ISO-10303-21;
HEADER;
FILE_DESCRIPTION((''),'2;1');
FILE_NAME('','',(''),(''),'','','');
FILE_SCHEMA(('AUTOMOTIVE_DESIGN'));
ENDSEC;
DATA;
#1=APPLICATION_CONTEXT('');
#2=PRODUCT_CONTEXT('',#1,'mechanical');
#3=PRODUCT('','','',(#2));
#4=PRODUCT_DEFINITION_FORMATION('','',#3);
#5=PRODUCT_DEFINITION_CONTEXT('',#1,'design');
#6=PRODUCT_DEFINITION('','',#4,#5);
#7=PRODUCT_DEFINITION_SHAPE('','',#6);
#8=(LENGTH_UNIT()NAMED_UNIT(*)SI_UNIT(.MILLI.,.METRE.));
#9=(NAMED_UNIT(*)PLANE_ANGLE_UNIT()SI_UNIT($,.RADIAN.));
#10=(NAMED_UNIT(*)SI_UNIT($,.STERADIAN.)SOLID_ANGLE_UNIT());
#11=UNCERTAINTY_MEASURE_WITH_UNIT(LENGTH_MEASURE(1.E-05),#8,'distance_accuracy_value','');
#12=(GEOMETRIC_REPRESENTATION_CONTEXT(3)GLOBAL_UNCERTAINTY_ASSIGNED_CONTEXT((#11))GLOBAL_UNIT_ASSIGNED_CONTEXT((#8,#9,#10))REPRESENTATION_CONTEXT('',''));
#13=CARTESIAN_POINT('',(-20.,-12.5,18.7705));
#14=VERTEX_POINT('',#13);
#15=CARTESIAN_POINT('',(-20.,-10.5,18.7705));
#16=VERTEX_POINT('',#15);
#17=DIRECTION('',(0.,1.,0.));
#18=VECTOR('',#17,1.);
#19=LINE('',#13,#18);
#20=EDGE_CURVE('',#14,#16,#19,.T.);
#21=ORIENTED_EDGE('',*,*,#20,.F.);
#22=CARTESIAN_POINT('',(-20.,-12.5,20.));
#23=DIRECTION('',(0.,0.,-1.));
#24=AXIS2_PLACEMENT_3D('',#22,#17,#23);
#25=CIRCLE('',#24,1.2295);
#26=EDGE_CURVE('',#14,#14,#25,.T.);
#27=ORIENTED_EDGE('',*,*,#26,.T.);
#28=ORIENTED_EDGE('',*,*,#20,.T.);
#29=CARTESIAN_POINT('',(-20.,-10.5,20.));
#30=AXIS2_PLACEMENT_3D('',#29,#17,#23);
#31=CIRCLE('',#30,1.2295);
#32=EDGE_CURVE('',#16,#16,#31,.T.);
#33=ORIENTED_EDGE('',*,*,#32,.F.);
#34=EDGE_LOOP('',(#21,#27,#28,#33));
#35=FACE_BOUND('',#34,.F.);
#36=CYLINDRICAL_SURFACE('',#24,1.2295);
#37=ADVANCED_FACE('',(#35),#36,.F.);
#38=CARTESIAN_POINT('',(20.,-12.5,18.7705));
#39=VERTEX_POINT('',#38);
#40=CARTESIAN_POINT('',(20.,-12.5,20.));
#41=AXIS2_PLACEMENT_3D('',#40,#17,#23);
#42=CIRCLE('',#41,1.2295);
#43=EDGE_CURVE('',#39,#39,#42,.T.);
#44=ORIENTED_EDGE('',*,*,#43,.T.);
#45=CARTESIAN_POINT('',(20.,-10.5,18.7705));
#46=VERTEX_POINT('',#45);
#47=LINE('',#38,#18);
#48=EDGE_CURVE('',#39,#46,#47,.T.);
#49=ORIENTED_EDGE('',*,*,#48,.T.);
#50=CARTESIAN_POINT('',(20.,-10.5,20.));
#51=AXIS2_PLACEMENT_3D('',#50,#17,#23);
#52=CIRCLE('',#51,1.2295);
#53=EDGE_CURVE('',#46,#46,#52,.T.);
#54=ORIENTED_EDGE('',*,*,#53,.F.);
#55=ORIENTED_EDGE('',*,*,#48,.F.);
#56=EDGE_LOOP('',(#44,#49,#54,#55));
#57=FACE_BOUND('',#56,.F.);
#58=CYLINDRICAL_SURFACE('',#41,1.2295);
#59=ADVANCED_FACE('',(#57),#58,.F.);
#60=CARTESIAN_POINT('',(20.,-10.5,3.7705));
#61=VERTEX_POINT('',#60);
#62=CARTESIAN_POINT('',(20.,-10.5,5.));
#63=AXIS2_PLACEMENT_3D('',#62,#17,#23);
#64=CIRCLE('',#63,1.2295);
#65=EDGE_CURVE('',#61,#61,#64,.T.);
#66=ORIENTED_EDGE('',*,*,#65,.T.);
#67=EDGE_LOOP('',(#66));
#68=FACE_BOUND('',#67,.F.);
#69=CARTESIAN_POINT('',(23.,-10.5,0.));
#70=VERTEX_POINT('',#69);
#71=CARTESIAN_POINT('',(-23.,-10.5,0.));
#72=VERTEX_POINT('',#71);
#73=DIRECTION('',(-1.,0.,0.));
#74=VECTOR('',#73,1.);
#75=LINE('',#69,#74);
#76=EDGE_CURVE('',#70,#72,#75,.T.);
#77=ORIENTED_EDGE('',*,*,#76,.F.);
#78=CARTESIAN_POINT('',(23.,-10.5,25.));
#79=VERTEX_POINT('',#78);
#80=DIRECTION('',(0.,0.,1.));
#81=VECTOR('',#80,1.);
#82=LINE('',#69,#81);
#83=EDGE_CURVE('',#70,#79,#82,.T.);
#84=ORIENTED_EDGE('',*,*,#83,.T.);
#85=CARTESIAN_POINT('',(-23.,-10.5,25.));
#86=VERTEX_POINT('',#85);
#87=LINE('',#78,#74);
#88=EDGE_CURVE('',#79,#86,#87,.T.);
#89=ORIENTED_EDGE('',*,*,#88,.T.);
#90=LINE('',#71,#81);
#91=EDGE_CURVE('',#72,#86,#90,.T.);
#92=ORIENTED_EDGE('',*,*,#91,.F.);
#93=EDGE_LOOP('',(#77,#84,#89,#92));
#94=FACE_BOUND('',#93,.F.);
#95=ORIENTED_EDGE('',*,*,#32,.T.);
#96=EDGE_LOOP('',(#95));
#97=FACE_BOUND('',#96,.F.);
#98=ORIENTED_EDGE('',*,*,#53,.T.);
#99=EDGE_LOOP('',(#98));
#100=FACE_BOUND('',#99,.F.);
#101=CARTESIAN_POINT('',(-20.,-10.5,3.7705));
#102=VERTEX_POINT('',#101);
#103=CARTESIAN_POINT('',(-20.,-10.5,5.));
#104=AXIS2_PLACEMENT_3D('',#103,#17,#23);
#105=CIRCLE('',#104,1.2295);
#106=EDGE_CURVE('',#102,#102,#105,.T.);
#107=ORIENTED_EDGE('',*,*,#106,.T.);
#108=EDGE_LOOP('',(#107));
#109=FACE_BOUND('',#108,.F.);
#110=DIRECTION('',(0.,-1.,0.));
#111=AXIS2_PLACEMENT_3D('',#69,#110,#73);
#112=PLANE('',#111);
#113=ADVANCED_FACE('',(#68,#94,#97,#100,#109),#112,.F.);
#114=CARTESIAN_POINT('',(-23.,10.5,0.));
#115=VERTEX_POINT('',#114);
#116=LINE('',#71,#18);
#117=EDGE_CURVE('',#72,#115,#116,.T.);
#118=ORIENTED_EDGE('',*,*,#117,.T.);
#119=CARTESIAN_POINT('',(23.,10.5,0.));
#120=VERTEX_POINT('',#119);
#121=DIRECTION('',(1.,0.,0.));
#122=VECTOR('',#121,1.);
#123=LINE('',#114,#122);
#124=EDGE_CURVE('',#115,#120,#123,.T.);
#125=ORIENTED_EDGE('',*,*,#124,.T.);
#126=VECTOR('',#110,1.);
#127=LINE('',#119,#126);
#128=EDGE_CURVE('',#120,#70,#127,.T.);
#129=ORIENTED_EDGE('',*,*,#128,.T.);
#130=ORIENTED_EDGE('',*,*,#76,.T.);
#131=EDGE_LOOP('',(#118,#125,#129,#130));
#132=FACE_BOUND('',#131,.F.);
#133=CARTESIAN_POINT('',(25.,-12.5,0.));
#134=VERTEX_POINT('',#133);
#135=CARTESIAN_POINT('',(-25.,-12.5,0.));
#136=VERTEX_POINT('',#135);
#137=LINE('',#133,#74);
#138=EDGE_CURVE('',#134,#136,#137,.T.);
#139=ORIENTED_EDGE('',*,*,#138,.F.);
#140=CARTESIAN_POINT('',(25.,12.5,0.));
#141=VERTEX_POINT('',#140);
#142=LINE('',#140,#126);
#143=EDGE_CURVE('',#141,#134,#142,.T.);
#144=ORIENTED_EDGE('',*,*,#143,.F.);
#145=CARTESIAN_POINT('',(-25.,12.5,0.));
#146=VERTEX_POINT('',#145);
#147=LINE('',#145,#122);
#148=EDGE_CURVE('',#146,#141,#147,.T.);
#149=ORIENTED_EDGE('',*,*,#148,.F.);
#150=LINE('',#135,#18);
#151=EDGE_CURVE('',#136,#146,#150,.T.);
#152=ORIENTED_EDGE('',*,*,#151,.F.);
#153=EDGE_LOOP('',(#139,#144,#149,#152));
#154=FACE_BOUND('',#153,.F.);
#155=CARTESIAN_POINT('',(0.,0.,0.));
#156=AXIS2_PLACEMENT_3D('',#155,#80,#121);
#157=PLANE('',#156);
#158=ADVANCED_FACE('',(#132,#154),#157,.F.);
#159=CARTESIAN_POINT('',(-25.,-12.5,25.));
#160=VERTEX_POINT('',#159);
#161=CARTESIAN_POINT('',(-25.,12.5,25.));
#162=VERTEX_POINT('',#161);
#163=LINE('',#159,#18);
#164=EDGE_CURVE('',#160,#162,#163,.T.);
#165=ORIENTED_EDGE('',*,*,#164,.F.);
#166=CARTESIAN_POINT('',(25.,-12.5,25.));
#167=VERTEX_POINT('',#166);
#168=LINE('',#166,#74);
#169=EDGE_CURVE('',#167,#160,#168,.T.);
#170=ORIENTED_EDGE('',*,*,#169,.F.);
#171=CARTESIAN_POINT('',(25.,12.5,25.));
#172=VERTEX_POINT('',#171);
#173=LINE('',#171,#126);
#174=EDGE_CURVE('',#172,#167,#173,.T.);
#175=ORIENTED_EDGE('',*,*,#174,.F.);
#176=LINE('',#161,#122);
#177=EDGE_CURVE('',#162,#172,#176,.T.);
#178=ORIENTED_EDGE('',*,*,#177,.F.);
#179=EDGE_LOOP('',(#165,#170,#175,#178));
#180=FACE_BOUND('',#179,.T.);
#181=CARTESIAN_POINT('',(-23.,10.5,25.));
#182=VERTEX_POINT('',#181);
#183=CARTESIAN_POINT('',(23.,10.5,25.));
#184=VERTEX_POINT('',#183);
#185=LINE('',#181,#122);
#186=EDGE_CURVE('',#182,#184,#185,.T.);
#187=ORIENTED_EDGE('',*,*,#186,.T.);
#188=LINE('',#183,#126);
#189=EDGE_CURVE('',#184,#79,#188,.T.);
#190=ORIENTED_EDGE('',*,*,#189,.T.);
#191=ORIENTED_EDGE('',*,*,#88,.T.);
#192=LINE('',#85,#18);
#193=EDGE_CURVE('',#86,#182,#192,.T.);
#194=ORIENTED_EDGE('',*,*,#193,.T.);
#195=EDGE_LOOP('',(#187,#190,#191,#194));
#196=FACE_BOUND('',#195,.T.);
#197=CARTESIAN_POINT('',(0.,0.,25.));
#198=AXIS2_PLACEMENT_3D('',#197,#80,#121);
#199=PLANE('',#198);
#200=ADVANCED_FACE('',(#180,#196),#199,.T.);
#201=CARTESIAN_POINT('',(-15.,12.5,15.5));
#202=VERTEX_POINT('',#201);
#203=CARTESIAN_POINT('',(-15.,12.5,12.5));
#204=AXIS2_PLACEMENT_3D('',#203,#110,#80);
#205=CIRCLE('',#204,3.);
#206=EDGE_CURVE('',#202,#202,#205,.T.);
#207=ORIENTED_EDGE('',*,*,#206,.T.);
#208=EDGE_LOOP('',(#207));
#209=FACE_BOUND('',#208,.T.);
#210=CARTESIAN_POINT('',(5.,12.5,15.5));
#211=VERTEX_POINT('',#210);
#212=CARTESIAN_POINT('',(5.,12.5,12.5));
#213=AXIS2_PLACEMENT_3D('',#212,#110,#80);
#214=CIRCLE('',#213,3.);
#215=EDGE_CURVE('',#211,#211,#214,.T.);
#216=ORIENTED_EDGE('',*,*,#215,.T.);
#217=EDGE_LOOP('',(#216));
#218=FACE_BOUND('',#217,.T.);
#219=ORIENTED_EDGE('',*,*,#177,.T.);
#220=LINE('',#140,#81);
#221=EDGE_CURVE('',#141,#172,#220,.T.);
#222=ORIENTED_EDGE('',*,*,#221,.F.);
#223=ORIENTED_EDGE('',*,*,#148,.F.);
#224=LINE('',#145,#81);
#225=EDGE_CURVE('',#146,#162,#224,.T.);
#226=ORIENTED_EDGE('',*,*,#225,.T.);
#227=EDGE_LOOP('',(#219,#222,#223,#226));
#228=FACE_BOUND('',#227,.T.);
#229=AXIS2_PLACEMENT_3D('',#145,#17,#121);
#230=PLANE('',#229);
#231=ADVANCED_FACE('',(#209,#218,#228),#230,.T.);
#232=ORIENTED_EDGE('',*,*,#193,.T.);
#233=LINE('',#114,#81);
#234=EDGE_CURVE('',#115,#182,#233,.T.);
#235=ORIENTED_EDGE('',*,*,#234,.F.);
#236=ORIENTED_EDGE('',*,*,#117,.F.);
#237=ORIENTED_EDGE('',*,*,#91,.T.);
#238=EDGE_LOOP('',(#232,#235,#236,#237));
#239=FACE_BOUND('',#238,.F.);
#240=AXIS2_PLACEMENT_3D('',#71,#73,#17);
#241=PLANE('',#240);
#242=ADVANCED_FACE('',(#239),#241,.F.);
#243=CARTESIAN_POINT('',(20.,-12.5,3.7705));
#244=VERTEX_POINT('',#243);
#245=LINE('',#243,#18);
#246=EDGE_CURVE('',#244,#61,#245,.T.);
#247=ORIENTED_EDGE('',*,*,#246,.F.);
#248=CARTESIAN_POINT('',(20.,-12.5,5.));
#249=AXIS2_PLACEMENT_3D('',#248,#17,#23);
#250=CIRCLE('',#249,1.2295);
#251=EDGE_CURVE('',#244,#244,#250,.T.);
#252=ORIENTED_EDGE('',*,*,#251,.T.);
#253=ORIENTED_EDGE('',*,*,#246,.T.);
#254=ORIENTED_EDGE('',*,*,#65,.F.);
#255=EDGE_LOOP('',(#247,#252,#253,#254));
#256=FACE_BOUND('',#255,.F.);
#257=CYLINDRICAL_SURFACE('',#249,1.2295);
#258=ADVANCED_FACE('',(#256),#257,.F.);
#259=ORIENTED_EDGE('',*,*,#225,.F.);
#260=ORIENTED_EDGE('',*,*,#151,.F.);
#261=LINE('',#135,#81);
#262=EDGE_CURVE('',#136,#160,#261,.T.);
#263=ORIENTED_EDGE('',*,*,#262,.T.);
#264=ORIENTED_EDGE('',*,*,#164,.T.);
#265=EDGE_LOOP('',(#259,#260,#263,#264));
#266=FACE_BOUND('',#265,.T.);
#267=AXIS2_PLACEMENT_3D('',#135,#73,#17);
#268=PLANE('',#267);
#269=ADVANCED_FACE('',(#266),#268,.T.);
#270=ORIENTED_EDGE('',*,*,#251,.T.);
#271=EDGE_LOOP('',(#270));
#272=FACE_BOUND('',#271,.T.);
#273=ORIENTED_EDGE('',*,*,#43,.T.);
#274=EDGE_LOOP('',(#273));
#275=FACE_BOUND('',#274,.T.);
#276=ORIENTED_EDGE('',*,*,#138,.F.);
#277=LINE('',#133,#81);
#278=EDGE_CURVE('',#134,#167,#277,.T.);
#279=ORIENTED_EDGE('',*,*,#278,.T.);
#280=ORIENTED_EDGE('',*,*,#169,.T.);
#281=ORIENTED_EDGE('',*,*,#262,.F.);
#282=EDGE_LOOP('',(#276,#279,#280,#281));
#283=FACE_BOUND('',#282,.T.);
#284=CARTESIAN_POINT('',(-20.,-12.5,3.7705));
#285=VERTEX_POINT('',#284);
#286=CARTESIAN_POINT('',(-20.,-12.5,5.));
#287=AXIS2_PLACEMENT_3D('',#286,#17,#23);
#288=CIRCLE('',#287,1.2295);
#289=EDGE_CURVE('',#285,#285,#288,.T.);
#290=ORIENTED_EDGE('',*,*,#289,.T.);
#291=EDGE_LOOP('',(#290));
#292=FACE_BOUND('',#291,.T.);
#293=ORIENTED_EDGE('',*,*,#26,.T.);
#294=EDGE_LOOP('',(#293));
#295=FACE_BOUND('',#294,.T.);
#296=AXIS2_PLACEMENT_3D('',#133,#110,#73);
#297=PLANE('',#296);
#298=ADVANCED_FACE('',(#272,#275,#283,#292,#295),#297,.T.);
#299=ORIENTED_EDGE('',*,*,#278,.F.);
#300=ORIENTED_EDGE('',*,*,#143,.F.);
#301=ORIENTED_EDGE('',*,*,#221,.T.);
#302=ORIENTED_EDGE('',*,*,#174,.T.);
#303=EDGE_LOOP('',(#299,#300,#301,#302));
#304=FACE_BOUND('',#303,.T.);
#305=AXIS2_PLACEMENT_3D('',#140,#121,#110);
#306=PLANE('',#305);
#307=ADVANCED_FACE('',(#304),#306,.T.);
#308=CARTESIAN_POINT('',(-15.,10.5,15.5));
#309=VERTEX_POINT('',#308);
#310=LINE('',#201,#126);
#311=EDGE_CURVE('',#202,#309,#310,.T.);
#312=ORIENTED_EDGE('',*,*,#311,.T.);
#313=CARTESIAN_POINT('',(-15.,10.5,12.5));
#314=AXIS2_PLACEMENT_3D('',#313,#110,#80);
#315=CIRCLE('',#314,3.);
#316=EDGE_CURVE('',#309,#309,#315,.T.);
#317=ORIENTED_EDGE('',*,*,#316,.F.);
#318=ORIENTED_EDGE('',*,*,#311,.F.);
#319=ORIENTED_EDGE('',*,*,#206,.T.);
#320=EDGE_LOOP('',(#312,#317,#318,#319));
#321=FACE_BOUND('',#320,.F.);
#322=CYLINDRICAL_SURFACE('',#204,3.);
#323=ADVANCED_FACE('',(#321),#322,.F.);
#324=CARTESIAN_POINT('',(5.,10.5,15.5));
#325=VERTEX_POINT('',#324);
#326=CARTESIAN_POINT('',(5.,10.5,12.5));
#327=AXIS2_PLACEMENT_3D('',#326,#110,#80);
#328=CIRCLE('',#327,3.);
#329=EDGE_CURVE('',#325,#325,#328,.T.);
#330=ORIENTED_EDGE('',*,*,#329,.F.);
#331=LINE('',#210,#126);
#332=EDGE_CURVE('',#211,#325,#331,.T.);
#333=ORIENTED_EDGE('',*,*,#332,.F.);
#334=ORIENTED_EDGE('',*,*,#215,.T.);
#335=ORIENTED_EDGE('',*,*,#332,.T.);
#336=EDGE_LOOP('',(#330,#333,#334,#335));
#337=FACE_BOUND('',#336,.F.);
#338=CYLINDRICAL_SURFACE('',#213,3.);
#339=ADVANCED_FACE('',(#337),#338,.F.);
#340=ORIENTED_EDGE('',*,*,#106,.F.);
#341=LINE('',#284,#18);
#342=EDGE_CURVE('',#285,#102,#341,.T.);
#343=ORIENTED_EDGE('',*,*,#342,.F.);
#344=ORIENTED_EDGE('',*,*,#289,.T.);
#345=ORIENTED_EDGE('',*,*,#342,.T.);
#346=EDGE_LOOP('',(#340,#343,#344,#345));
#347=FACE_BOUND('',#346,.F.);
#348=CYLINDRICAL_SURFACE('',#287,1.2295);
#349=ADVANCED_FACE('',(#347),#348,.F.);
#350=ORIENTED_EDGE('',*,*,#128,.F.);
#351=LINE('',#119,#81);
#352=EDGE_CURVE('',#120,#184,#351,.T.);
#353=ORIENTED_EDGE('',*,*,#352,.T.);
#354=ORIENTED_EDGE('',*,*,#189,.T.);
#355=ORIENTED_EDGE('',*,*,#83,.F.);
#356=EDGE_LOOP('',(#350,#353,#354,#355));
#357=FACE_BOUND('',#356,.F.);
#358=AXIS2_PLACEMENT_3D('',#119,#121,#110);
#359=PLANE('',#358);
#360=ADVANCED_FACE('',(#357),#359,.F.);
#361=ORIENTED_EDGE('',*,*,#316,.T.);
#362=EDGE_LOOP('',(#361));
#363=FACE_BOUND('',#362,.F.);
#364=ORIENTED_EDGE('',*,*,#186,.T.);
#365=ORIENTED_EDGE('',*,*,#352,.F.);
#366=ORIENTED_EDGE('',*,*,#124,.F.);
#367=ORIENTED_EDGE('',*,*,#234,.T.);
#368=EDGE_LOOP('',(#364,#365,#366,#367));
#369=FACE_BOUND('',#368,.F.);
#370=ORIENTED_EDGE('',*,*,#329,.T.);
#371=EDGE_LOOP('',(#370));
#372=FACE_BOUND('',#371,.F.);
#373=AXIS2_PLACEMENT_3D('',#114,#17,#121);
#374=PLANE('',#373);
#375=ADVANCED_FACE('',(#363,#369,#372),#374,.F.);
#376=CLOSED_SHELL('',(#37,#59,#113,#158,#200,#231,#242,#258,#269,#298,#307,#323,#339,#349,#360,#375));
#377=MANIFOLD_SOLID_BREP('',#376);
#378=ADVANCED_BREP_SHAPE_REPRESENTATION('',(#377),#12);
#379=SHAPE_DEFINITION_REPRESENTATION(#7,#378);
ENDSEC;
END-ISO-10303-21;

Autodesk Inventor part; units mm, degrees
ref_plane "YZ Plane" through (0, 0, 0) normal (1, 0, 0) x (0, 1, 0)
ref_plane "XZ Plane" through (0, 0, 0) normal (0, 1, 0) x (-1, 0, 0)
ref_plane "XY Plane" through (0, 0, 0) normal (0, 0, 1) x (1, 0, 0)
sketch "スケッチ1" plane through (0, 0, 0) normal (0, 0, 1) x (1, 0, 0)
  line L0 (-25, 12.5) -> (25, 12.5)
  line L1 (25, 12.5) -> (25, -12.5)
  line L2 (25, -12.5) -> (-25, -12.5)
  line L3 (-25, -12.5) -> (-25, 12.5)
  line L4 (-23, 10.5) -> (23, 10.5)
  line L5 (23, 10.5) -> (23, -10.5)
  line L6 (23, -10.5) -> (-23, -10.5)
  line L7 (-23, -10.5) -> (-23, 10.5)
  point P0 (0, 0)
  dimension "d0" = 50
  dimension "d1" = 25
  dimension "d2" = 12.5
  dimension "d3" = 25
  dimension "d4" = 2
  dimension "d5" = 2
  dimension "d6" = 2
  dimension "d7" = 2
extrude "押し出し1" add sketch "スケッチ1" along normal blind 25
sketch "スケッチ4" plane through (-25, -12.5, 0) normal (0, -1, 0) x (1, 0, 0)
  line L0 (50, 25) -> (0, 25) projected
  line L1 (0, 0) -> (0, 25) projected
  line L2 (50, 0) -> (0, 0) projected
  line L3 (50, 0) -> (50, 25) projected
  point P0 (25, 0)
  point P1 (5, 20)
  point P2 (5, 5)
  point P3 (45, 5)
  point P4 (45, 20)
  dimension "d27" = 5
  dimension "d28" = 5
  dimension "d29" = 5
  dimension "d30" = 5
  dimension "d31" = 5
  dimension "d32" = 5
  dimension "d33" = 5
  dimension "d34" = 5
hole "Hole3" at (-20, -12.5, 20) at (-20, -12.5, 5) at (20, -12.5, 5) at (20, -12.5, 20) direction (0, 1, 0) diameter 2.459 end up to surface thread size "M3x0.5" class "6H" standard "ISO Metric profile"
sketch "スケッチ5" plane through (-25, 12.5, 0) normal (0, 1, 0) x (1, 0, 0)
  line L0 (0, 0) -> (50, 0) projected
  line L1 (0, 0) -> (0, -25) projected
  point P0 (25, 0)
  point P1 (10, -12.5)
  point P2 (30, -12.5)
  dimension "d42" = 10
  dimension "d43" = 20
  dimension "d44" = 12.5
  dimension "d45" = 12.5
hole "Hole4" at (-15, 12.5, 12.5) at (5, 12.5, 12.5) direction (0, -1, 0) diameter 6 end up to surface
equation "\"d2\" = 0.5 * d1"
equation "\"d3\" = 0.5 * d0"
equation "\"d5\" = d4"
equation "\"d6\" = d4"
equation "\"d7\" = d4"
equation "\"d28\" = d27"
equation "\"d29\" = d27"
equation "\"d30\" = d27"
equation "\"d31\" = d27"
equation "\"d32\" = d27"
equation "\"d33\" = d27"
equation "\"d34\" = d27"
equation "\"d45\" = d44"
properties part number "JointC0"
